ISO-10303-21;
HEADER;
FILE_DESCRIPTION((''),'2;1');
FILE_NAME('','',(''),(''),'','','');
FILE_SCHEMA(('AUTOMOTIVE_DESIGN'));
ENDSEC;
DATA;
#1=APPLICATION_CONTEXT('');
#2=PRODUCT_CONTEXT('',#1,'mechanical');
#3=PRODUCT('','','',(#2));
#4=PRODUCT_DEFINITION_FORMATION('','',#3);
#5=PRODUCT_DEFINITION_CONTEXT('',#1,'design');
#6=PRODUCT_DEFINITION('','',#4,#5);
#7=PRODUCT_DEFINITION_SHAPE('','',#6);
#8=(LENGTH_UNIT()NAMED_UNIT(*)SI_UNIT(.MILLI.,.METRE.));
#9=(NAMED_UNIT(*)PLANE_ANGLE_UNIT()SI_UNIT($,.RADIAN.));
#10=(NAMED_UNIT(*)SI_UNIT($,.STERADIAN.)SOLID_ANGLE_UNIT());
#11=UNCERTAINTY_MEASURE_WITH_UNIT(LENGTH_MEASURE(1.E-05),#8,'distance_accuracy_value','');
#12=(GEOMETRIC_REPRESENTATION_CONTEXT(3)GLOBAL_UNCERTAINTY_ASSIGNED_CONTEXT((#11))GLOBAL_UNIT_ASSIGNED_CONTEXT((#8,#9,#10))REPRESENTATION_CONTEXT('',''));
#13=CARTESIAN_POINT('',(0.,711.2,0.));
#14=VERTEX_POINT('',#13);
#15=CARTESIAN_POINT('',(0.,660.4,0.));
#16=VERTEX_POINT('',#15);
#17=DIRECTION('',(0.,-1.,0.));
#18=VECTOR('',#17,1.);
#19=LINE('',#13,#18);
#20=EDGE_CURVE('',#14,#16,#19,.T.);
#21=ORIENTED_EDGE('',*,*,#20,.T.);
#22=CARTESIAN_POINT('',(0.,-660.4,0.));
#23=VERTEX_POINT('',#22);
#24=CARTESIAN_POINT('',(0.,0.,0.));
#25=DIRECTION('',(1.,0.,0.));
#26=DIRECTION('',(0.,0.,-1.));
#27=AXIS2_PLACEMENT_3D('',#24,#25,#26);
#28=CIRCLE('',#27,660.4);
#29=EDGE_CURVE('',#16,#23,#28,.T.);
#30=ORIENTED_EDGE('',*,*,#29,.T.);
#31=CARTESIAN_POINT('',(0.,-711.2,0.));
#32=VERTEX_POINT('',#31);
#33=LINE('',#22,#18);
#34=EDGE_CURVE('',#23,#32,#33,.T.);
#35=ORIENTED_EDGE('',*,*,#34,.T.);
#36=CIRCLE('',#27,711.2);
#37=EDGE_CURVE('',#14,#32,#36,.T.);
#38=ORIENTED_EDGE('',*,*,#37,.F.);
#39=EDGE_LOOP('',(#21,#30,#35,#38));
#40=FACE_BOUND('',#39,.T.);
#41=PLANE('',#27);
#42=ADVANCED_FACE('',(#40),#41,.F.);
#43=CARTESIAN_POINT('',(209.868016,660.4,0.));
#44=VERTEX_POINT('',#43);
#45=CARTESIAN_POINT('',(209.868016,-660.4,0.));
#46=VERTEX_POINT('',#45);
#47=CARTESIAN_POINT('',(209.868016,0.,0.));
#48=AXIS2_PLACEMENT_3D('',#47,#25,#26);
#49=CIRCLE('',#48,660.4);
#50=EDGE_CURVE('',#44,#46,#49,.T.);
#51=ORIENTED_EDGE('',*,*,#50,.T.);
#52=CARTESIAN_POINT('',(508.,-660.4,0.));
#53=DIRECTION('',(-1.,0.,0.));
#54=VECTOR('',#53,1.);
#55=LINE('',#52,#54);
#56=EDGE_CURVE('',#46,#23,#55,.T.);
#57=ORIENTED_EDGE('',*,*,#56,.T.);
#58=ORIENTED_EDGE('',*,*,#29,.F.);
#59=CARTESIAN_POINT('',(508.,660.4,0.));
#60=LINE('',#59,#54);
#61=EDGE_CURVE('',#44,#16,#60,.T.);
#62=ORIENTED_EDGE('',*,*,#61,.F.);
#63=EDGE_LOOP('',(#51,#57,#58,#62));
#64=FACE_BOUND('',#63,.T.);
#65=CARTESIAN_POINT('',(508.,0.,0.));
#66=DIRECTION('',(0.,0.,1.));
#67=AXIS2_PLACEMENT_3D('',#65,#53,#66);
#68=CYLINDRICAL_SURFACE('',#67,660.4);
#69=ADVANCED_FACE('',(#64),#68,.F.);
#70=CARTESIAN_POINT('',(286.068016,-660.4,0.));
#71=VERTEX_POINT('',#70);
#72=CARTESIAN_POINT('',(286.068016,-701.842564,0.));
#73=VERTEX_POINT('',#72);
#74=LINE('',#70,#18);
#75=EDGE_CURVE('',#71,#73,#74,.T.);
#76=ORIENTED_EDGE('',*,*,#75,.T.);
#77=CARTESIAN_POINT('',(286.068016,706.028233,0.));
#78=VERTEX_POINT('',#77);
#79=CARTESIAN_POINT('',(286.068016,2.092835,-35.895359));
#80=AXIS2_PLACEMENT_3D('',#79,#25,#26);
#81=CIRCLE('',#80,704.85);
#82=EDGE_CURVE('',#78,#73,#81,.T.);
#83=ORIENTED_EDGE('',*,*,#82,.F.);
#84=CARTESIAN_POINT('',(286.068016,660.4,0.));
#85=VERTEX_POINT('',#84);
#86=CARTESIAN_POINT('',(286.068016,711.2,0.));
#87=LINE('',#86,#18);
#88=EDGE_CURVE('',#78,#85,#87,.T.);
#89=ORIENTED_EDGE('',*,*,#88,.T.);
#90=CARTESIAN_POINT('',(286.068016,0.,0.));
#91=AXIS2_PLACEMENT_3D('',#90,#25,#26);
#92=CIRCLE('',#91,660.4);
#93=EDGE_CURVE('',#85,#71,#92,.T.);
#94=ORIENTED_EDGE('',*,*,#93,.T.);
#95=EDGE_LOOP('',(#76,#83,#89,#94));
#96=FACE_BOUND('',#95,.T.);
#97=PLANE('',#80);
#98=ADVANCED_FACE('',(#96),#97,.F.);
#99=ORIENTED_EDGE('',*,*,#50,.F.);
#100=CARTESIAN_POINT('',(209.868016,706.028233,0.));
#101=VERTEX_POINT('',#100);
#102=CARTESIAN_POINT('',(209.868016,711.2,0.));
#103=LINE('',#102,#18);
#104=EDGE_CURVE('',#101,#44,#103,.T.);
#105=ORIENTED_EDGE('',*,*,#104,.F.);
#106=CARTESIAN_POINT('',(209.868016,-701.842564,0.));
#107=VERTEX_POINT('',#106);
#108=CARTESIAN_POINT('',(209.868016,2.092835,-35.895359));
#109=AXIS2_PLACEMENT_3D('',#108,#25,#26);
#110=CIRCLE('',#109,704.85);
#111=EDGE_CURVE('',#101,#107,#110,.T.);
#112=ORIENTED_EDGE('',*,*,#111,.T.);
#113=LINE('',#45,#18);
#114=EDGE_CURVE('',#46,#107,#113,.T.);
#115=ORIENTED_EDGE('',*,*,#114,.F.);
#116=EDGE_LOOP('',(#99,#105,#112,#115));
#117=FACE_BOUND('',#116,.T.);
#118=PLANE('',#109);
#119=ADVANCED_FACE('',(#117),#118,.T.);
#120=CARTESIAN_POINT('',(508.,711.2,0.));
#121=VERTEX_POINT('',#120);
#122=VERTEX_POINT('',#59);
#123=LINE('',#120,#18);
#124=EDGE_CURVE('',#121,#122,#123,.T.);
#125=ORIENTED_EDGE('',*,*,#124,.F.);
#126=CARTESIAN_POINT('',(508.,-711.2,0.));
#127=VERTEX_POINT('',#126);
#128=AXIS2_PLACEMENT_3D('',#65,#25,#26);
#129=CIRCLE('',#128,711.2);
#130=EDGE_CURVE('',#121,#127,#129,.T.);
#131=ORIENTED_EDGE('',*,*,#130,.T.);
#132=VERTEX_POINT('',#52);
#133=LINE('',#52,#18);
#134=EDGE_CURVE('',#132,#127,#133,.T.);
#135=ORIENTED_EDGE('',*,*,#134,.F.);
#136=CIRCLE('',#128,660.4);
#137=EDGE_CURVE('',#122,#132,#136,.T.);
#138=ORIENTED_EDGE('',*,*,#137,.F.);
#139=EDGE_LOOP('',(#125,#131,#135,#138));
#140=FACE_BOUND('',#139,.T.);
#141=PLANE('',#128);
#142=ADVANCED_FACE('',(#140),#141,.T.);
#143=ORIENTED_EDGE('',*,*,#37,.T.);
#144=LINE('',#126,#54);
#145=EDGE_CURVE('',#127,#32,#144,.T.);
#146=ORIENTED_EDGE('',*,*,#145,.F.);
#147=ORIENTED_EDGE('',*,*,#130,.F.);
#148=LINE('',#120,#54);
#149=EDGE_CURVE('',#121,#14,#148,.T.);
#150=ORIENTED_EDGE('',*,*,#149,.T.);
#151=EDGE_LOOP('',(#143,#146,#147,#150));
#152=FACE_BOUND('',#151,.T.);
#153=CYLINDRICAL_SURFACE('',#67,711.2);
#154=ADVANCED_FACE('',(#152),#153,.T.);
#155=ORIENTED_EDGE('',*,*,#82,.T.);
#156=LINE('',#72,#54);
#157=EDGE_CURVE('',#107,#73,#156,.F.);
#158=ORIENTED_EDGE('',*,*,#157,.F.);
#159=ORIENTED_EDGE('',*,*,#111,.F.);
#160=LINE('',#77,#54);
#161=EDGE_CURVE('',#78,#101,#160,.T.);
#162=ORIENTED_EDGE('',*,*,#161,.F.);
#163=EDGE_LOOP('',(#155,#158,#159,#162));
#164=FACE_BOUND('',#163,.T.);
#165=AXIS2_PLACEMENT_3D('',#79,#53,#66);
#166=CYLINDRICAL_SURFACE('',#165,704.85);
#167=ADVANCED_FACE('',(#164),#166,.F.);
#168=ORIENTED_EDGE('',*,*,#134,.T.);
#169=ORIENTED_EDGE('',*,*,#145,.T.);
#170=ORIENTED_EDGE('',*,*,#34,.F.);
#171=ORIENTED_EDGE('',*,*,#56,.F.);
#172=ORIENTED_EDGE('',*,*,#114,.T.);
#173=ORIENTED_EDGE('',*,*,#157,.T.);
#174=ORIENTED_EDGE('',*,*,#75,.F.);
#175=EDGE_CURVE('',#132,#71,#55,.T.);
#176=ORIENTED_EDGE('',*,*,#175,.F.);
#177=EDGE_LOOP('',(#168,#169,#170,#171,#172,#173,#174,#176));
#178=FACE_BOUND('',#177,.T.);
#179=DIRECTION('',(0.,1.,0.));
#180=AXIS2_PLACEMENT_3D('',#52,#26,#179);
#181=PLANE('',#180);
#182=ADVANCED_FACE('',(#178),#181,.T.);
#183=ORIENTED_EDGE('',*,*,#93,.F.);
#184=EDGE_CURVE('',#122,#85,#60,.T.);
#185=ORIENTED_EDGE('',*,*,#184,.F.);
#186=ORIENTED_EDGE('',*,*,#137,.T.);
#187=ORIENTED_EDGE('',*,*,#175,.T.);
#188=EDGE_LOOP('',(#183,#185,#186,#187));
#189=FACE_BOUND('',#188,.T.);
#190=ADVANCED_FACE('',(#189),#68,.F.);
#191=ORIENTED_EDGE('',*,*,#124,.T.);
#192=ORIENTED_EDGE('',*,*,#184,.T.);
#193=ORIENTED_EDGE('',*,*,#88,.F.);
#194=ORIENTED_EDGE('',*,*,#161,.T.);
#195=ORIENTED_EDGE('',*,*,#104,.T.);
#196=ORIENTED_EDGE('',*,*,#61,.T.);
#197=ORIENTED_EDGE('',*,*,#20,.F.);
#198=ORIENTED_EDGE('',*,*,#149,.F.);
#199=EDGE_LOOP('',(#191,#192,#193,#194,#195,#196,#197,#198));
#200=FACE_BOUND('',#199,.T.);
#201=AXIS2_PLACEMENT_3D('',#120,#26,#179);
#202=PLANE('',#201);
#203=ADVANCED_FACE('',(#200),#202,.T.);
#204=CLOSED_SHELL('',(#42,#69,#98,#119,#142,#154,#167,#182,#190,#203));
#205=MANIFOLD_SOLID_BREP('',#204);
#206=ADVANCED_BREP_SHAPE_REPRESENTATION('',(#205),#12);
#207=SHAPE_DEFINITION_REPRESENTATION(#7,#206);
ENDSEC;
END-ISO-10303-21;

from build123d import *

# Parameters (mm, degrees)
EXTRUDE_THIN1_DEPTH = 508
CAVITY2_START       = 209.868015847
CAVITY2_DEPTH       = 76.2


# Read off the part's stored shape, not the designer's step: Cavity2
with BuildPart() as part:
    # Sketch1 → Extrude-Thin1 (new body)
    with BuildSketch(Plane(origin=(0, 0, 0), x_dir=(0, 0, -1), z_dir=(1, 0, 0))):
        with BuildLine():
            ThreePointArc((0, 660.4), (-660.4, 0), (0, -660.4))
            Line((0, -660.4), (0, -711.2))
            ThreePointArc((0, -711.2), (-711.2, 0), (0, 711.2))
            Line((0, 711.2), (0, 660.4))
        make_face()
    extrude(amount=EXTRUDE_THIN1_DEPTH)

    # Cavity2 outline → Cavity2 (cut)
    with BuildSketch(Plane.YZ.offset(CAVITY2_START)):
        with BuildLine():
            ThreePointArc((706.028233309, 0), (2.092834501, 668.954640909), (-701.842564308, 0))
            Line((-701.842564308, 0), (-660.4, 0))
            ThreePointArc((-660.4, 0), (0, 660.4), (660.4, 0))
            Line((660.4, 0), (706.028233309, 0))
        make_face()
    extrude(amount=CAVITY2_DEPTH, mode=Mode.SUBTRACT)


solid = part.part
